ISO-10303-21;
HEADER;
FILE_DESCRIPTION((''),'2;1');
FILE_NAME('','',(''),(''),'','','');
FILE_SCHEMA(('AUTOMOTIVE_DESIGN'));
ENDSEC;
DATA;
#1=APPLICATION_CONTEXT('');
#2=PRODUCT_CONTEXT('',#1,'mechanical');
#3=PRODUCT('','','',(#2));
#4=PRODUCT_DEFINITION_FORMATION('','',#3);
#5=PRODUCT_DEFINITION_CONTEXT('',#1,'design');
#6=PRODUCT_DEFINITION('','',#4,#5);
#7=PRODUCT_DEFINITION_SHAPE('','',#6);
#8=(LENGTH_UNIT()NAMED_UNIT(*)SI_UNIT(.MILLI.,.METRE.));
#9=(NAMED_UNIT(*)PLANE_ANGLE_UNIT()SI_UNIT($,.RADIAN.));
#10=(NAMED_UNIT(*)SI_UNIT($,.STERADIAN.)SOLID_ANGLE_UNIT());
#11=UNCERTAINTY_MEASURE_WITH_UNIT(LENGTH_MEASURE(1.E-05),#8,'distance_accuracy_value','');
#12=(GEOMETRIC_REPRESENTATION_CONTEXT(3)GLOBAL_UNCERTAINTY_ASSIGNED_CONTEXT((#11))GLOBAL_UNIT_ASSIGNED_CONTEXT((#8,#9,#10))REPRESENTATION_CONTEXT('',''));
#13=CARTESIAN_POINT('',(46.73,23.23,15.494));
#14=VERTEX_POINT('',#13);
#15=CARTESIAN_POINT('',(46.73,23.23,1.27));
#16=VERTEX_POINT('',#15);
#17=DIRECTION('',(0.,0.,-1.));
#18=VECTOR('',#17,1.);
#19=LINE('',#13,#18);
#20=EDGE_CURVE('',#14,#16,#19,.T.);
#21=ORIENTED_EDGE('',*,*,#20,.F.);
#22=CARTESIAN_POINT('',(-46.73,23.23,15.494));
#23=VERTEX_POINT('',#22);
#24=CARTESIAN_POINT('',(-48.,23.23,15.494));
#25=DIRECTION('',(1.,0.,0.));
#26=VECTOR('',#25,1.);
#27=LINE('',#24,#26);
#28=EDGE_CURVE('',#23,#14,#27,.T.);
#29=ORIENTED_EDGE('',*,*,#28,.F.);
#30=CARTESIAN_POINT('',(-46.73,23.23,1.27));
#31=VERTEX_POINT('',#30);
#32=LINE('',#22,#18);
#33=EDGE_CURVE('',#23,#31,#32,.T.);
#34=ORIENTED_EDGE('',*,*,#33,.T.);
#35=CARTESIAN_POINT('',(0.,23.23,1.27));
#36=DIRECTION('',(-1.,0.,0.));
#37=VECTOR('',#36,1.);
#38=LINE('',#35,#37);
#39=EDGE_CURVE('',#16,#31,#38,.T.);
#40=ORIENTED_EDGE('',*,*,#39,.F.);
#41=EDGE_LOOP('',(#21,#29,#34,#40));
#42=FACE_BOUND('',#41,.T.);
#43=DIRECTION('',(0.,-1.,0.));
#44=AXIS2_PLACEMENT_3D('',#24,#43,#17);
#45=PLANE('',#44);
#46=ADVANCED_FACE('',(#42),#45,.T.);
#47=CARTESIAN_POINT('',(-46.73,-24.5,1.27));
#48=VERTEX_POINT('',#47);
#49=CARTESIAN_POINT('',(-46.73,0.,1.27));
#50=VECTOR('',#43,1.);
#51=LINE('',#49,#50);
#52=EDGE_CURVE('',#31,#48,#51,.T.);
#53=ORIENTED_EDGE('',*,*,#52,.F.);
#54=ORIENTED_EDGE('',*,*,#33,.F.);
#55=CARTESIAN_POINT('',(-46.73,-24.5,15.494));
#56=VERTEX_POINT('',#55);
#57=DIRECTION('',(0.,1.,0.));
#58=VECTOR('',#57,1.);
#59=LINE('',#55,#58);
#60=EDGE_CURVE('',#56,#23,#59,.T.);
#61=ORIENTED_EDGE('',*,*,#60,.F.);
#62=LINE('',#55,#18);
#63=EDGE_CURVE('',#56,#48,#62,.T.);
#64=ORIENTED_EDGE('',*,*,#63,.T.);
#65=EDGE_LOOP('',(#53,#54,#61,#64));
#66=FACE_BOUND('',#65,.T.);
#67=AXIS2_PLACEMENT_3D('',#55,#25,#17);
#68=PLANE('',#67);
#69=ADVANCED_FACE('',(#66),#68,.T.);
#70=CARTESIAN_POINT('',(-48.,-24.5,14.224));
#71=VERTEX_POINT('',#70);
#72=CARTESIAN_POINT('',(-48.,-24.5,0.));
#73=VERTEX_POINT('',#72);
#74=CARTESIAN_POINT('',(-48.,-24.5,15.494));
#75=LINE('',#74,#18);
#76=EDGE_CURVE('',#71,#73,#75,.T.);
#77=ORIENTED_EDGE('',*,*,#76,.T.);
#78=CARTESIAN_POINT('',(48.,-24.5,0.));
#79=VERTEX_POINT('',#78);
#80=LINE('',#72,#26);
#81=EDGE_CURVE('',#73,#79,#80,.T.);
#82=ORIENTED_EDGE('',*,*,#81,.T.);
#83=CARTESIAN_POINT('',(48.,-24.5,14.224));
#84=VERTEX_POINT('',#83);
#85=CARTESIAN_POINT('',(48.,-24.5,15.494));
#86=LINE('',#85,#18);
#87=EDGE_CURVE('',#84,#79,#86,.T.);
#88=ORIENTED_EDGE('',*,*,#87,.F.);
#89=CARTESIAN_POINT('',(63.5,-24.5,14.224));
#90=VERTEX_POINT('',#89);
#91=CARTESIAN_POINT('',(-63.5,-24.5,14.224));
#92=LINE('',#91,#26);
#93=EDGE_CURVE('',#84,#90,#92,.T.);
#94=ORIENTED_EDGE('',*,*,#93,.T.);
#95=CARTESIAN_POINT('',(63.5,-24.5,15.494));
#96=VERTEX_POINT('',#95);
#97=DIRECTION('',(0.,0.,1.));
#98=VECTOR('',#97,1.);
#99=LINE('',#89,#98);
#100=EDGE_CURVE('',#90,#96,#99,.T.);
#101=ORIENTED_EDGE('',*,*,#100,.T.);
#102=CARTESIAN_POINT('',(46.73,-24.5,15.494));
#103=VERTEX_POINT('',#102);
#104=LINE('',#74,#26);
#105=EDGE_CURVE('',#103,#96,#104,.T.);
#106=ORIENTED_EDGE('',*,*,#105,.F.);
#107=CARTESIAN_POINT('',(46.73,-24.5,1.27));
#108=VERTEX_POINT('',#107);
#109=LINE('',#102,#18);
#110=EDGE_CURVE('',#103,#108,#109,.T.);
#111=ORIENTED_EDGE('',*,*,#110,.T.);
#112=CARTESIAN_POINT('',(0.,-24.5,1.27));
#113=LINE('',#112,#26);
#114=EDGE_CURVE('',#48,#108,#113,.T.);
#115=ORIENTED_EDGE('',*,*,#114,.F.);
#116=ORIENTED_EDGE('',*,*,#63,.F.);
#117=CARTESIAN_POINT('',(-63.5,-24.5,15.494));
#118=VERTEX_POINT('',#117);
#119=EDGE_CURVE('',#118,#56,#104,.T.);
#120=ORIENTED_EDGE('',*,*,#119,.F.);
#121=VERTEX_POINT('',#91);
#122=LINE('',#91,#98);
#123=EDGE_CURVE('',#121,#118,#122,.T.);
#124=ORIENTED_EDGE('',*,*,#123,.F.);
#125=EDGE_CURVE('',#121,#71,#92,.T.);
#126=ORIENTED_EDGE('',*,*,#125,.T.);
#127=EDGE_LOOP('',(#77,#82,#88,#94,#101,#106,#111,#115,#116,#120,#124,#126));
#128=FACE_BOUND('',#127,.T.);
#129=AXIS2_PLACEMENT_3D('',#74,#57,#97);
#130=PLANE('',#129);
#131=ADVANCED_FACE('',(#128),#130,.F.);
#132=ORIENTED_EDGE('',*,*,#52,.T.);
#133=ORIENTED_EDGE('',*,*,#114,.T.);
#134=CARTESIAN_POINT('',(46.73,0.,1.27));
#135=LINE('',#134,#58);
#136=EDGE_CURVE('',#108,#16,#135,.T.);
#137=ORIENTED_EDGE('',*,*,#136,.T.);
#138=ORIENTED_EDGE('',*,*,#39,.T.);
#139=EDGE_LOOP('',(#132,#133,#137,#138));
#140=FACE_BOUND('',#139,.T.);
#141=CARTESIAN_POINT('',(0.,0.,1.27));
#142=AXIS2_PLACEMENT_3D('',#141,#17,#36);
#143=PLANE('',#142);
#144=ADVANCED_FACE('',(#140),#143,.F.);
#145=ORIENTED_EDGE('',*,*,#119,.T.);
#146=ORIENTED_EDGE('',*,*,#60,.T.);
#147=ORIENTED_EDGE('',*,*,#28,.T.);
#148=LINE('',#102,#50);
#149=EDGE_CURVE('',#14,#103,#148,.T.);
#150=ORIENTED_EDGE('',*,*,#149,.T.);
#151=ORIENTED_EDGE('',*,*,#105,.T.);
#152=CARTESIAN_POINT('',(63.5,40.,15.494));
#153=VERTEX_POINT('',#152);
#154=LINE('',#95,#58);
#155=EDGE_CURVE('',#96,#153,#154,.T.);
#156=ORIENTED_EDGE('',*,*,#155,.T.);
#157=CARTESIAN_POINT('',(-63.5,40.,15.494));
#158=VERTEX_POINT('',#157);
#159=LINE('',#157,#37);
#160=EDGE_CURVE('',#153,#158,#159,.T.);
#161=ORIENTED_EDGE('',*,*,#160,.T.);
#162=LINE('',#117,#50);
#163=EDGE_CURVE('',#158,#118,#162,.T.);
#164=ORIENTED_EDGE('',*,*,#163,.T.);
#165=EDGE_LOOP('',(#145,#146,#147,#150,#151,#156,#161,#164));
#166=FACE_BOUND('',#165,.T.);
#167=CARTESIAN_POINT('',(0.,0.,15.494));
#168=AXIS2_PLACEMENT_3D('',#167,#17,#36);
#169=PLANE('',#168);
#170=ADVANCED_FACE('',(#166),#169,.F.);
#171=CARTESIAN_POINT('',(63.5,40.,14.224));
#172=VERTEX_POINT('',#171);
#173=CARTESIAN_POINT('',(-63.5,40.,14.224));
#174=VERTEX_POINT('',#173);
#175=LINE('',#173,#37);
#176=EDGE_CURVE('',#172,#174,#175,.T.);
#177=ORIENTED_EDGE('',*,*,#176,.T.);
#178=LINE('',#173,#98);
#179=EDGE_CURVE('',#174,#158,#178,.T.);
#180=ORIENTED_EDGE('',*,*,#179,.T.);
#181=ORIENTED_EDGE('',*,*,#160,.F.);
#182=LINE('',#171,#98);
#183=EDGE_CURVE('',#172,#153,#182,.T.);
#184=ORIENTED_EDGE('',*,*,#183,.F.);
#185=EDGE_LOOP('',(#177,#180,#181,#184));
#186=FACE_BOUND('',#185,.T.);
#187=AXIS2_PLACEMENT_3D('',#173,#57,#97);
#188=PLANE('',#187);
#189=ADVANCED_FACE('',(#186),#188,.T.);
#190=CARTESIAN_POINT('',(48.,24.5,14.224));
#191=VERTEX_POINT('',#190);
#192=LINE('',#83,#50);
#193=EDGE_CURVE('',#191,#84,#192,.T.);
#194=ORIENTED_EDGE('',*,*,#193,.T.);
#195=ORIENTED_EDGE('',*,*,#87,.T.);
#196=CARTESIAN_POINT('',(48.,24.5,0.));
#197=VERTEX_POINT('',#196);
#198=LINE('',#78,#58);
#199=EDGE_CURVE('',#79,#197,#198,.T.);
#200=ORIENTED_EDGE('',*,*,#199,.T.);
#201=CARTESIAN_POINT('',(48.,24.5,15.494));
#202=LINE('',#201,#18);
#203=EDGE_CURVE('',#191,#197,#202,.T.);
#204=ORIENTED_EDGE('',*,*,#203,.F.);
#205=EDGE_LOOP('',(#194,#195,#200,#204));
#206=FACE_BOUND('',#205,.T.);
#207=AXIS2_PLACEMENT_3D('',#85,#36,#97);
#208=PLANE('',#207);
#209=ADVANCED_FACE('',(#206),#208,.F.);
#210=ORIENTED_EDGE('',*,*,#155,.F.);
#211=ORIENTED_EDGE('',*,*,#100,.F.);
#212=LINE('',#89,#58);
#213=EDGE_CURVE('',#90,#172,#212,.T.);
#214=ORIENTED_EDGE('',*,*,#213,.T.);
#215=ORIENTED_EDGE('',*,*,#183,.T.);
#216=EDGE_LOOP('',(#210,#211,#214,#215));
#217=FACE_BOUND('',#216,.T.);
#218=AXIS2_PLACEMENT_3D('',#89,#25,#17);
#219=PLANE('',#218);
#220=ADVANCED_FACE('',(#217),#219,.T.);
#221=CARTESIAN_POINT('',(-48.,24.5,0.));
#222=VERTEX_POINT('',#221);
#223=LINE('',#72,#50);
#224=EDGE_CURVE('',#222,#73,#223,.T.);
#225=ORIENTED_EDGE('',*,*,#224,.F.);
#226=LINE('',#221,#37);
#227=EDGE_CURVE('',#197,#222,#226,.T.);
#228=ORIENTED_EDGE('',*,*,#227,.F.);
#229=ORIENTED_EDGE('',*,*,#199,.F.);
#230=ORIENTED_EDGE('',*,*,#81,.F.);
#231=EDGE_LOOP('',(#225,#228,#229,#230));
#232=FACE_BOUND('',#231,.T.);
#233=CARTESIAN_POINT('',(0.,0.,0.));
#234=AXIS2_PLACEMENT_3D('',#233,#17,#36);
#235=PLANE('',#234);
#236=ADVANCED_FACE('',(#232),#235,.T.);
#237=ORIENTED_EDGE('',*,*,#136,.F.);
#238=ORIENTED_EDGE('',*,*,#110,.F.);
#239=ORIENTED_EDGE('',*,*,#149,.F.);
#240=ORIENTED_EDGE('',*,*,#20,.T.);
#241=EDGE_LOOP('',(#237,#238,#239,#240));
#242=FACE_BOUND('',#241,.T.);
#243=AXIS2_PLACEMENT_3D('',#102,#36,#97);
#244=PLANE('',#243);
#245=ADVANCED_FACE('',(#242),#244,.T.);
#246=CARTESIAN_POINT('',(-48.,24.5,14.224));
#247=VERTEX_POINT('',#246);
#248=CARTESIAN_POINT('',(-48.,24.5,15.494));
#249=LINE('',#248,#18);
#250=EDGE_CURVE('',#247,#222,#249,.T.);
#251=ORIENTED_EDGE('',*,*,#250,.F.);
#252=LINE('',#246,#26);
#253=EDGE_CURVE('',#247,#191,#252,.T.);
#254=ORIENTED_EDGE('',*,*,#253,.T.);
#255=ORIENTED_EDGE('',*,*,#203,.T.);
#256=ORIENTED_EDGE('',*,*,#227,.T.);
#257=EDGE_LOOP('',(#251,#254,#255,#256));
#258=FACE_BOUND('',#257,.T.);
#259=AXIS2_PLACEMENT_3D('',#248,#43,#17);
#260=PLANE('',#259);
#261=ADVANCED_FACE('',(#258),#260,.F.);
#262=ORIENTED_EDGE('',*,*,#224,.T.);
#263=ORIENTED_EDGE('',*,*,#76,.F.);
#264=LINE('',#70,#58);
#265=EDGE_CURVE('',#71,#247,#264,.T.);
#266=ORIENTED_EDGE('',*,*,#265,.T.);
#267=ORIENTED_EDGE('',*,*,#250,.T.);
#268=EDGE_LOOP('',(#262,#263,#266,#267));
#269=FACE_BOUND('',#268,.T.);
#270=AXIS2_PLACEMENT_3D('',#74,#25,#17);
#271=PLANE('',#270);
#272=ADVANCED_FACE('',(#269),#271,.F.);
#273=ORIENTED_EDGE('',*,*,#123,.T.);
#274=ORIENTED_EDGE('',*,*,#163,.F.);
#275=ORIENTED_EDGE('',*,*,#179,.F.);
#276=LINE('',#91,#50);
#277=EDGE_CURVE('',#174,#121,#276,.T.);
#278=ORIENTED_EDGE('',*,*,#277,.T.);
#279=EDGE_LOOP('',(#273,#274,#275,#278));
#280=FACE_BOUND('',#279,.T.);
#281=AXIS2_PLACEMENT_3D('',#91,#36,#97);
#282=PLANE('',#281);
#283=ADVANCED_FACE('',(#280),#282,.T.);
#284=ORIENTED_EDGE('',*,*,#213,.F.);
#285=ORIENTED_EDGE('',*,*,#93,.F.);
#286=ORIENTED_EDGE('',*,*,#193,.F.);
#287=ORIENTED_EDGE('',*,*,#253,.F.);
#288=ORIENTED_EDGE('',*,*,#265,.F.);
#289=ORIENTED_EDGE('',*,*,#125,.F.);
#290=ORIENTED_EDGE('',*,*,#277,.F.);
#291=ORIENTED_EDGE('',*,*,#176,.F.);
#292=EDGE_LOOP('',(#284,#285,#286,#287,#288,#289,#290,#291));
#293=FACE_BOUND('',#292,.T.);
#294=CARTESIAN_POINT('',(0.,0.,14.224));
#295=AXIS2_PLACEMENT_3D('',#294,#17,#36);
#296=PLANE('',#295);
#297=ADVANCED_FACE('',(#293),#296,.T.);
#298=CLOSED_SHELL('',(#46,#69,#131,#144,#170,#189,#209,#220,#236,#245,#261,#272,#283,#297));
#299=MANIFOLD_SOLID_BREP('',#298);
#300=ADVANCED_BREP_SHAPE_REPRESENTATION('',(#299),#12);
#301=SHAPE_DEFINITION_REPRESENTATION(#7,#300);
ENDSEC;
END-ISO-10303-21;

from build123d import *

# Parameters (mm, degrees)
SKETCH1_W           = 96
SKETCH1_H           = 49
BOSS_EXTRUDE1_DEPTH = 15.494
SKETCH2_W           = 127
SKETCH2_H           = 64.5
BOSS_EXTRUDE2_DEPTH = 1.27
SHELL1_START        = -46.73
SHELL1_OUTLINE_W    = 47.73
SHELL1_OUTLINE_H    = 14.224
SHELL1_DEPTH        = 93.46


# Read off the part's stored shape, not the designer's step: Shell1
with BuildPart() as part:
    # Sketch1 → Boss-Extrude1 (new body)
    with BuildSketch(Plane.XY):
        Rectangle(SKETCH1_W, SKETCH1_H)
    extrude(amount=BOSS_EXTRUDE1_DEPTH)

    # Sketch2 → Boss-Extrude2 (add)
    with BuildSketch(Plane.XY.offset(15.494)):
        with Locations((0, 7.75)):
            Rectangle(SKETCH2_W, SKETCH2_H)
    extrude(amount=-BOSS_EXTRUDE2_DEPTH)

    # Shell1 outline → Shell1 (cut)
    with BuildSketch(Plane.YZ.offset(SHELL1_START)):
        with Locations((-0.635, 8.382)):
            Rectangle(SHELL1_OUTLINE_W, SHELL1_OUTLINE_H)
    extrude(amount=SHELL1_DEPTH, mode=Mode.SUBTRACT)


solid = part.part
